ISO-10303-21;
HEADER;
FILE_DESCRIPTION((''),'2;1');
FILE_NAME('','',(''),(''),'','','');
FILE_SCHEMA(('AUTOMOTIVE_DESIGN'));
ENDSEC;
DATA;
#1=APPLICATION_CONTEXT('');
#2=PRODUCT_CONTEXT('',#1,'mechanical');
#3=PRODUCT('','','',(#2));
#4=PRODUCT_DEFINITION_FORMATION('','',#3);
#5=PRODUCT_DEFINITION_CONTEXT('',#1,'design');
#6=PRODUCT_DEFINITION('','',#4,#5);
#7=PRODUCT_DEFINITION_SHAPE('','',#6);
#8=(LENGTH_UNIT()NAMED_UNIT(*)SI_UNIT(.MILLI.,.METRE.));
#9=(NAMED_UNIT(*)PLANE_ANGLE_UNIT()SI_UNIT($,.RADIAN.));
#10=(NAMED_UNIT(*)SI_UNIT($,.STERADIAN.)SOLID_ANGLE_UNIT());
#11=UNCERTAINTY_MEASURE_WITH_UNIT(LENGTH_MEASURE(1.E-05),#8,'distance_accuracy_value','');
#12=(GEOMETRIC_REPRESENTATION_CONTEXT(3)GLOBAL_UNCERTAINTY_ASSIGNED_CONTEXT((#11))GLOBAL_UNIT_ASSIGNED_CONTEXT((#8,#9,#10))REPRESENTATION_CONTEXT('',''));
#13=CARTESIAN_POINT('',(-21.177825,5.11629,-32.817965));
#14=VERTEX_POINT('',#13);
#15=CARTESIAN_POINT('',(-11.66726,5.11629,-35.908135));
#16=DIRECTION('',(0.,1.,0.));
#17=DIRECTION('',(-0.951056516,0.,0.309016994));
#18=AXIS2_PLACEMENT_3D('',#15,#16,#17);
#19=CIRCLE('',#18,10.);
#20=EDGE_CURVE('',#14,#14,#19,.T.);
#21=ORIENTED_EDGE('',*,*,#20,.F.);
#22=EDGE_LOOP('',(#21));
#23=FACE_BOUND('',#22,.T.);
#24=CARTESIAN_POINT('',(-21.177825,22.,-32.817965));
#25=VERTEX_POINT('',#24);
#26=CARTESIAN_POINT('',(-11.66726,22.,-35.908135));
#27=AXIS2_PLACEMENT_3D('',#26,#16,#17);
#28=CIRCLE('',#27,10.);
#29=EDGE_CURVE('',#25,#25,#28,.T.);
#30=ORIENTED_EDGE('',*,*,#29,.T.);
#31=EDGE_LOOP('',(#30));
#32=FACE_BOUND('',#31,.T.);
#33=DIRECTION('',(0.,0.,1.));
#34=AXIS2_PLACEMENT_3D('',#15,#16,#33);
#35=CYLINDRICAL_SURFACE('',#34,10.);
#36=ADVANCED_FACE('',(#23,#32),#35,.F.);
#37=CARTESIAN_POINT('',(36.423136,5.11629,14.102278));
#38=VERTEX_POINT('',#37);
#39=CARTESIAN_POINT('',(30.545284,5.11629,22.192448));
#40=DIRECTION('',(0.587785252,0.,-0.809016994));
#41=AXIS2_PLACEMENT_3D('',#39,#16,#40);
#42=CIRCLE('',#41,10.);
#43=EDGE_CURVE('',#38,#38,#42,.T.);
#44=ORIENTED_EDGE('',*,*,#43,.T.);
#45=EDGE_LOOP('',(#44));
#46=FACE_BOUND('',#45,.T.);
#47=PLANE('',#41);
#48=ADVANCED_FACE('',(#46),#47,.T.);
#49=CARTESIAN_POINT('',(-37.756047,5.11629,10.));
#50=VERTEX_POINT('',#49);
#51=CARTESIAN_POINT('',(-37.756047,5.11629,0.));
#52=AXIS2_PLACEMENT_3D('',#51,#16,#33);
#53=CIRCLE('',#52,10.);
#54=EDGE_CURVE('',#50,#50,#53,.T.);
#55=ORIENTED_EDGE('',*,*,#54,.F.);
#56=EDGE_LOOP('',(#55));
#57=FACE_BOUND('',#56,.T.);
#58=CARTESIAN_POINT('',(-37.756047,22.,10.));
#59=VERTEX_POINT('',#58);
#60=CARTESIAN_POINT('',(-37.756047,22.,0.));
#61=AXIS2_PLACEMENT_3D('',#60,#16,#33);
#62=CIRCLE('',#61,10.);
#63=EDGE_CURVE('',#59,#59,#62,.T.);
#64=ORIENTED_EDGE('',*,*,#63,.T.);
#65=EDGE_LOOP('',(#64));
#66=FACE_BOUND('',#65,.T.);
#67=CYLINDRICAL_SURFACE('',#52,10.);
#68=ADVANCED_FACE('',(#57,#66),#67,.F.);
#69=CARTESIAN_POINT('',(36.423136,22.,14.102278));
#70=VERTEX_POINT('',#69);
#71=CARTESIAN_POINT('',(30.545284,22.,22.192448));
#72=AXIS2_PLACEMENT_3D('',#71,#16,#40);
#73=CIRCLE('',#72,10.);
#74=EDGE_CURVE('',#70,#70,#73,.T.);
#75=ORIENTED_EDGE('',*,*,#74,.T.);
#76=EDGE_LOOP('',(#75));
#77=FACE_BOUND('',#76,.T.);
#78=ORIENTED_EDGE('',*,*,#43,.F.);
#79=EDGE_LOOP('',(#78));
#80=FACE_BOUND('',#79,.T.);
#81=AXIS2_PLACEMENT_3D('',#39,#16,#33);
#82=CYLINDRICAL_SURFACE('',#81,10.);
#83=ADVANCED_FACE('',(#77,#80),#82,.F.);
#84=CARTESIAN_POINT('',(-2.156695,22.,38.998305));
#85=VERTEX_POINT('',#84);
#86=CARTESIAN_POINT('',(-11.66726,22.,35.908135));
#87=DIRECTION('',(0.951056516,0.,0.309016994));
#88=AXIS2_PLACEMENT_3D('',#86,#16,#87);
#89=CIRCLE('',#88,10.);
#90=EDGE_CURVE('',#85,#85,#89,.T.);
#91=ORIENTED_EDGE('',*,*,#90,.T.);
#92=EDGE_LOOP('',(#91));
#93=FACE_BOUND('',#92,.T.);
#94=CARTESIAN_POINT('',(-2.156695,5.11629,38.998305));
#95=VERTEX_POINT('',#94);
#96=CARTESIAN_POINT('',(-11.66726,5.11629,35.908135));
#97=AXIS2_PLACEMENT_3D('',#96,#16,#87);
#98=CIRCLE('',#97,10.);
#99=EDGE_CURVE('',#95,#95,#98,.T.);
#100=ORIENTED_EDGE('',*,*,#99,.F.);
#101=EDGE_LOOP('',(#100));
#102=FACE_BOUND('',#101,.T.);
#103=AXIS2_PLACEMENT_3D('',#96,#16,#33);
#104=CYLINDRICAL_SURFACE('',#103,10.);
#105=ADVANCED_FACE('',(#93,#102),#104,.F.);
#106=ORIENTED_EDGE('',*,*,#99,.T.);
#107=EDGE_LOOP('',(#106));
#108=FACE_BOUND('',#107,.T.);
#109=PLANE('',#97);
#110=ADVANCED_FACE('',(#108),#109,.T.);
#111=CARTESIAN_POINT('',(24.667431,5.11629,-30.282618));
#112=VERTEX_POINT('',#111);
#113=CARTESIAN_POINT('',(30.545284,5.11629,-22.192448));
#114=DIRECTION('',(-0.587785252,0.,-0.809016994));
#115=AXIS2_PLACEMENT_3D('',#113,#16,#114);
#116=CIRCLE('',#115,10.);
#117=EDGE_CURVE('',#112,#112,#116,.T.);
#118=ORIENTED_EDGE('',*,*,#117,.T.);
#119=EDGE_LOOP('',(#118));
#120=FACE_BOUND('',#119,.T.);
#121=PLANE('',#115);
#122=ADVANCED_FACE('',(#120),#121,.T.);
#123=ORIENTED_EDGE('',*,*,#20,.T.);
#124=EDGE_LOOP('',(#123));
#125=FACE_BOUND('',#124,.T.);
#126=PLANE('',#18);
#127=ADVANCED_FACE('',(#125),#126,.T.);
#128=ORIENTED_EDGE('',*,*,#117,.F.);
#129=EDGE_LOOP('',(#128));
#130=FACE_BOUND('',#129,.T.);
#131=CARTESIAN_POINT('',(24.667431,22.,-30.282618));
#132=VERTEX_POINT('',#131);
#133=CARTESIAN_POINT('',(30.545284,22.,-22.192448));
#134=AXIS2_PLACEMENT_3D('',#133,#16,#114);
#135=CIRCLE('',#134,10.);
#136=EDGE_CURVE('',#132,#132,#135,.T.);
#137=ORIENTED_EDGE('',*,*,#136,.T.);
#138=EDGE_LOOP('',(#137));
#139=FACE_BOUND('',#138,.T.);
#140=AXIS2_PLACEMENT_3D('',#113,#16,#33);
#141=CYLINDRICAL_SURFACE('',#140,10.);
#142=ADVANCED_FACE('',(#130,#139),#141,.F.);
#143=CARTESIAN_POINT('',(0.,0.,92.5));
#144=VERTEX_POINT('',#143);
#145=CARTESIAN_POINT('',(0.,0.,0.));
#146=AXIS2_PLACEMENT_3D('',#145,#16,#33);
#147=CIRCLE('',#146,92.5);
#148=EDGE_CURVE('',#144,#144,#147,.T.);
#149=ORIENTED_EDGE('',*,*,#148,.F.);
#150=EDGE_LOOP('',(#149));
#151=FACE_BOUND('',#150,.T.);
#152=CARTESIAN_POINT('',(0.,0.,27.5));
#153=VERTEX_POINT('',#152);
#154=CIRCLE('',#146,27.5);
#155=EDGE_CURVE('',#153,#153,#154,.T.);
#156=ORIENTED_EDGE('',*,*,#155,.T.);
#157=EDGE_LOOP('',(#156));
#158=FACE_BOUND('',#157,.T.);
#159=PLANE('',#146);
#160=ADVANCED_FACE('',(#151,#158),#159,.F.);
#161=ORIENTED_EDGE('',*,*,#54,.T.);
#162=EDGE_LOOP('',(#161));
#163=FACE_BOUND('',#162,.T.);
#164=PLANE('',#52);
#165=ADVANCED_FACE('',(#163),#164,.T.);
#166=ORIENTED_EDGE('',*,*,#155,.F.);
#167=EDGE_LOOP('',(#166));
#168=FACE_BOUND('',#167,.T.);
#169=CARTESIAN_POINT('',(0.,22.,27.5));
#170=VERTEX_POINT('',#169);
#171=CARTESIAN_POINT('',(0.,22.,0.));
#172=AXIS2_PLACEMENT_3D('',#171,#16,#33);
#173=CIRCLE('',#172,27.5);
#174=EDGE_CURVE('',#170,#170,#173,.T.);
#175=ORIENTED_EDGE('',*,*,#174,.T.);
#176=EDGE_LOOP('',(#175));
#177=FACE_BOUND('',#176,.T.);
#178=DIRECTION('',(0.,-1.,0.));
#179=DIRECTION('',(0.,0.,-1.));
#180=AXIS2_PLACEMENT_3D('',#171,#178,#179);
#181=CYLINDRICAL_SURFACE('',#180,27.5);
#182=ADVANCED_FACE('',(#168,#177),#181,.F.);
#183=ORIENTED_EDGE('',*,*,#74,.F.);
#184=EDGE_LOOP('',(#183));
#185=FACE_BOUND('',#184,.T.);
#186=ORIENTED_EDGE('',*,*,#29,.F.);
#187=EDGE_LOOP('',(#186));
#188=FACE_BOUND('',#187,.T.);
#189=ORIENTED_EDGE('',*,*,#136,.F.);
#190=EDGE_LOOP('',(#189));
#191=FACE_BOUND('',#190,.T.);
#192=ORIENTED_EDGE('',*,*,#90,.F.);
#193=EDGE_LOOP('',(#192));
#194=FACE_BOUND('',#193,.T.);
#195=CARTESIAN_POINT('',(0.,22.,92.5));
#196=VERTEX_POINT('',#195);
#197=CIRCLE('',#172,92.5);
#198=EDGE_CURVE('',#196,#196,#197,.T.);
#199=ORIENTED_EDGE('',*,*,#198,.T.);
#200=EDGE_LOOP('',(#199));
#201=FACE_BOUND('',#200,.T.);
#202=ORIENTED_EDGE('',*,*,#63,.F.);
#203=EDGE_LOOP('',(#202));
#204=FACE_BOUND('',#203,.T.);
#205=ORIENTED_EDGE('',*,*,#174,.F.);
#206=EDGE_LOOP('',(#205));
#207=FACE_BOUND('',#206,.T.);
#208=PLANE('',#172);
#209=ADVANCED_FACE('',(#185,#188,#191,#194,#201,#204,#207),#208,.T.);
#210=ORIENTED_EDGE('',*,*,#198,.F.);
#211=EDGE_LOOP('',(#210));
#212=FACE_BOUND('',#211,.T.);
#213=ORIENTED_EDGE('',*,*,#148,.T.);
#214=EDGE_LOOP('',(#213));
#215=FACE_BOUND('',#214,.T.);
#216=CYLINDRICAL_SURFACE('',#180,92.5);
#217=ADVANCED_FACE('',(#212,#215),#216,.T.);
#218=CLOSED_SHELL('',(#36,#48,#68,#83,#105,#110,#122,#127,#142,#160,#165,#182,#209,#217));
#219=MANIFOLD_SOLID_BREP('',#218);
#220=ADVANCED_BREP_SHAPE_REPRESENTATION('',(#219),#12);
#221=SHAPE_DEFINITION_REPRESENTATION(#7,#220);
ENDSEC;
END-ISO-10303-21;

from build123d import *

# Parameters (mm, degrees)
SKETCH1_R           = 92.5
BOSS_EXTRUDE1_DEPTH = 22
SKETCH2_R           = 27.5
CUT_EXTRUDE1_DEPTH  = 133.651799837
SKETCH3_R           = 10
CUT_EXTRUDE2_DEPTH  = 16.88371012
CIRPATTERN1_COUNT   = 5


with BuildPart() as part:
    # Sketch1 → Boss-Extrude1 (new body)
    with BuildSketch(Plane(origin=(0, 0, 0), x_dir=(1, 0, 0), z_dir=(0, 1, 0))):
        Circle(SKETCH1_R)
    extrude(amount=BOSS_EXTRUDE1_DEPTH)

    # Sketch2 → Cut-Extrude1 (cut, through all)
    with BuildSketch(Plane(origin=(0, 0, 0), x_dir=(1, 0, 0), z_dir=(0, 1, 0))):
        Circle(SKETCH2_R)
    extrude(amount=CUT_EXTRUDE1_DEPTH, mode=Mode.SUBTRACT)

    # Sketch3 → Cut-Extrude2 (cut)
    with BuildSketch(Plane(origin=(0, 22, 0), x_dir=(1, 0, 0), z_dir=(0, 1, 0))):
        with Locations((-37.756047361, 0)):
            Circle(SKETCH3_R)
    cut_extrude2 = extrude(amount=-CUT_EXTRUDE2_DEPTH, mode=Mode.SUBTRACT)

    # CirPattern1: Cut-Extrude2 ×5 about axis
    cirpattern1_axis = Axis((0, 0, 0), (0, 1, 0))
    for i in range(1, CIRPATTERN1_COUNT):
        add(cut_extrude2.rotate(cirpattern1_axis, i * 360 / CIRPATTERN1_COUNT), mode=Mode.SUBTRACT)


solid = part.part
